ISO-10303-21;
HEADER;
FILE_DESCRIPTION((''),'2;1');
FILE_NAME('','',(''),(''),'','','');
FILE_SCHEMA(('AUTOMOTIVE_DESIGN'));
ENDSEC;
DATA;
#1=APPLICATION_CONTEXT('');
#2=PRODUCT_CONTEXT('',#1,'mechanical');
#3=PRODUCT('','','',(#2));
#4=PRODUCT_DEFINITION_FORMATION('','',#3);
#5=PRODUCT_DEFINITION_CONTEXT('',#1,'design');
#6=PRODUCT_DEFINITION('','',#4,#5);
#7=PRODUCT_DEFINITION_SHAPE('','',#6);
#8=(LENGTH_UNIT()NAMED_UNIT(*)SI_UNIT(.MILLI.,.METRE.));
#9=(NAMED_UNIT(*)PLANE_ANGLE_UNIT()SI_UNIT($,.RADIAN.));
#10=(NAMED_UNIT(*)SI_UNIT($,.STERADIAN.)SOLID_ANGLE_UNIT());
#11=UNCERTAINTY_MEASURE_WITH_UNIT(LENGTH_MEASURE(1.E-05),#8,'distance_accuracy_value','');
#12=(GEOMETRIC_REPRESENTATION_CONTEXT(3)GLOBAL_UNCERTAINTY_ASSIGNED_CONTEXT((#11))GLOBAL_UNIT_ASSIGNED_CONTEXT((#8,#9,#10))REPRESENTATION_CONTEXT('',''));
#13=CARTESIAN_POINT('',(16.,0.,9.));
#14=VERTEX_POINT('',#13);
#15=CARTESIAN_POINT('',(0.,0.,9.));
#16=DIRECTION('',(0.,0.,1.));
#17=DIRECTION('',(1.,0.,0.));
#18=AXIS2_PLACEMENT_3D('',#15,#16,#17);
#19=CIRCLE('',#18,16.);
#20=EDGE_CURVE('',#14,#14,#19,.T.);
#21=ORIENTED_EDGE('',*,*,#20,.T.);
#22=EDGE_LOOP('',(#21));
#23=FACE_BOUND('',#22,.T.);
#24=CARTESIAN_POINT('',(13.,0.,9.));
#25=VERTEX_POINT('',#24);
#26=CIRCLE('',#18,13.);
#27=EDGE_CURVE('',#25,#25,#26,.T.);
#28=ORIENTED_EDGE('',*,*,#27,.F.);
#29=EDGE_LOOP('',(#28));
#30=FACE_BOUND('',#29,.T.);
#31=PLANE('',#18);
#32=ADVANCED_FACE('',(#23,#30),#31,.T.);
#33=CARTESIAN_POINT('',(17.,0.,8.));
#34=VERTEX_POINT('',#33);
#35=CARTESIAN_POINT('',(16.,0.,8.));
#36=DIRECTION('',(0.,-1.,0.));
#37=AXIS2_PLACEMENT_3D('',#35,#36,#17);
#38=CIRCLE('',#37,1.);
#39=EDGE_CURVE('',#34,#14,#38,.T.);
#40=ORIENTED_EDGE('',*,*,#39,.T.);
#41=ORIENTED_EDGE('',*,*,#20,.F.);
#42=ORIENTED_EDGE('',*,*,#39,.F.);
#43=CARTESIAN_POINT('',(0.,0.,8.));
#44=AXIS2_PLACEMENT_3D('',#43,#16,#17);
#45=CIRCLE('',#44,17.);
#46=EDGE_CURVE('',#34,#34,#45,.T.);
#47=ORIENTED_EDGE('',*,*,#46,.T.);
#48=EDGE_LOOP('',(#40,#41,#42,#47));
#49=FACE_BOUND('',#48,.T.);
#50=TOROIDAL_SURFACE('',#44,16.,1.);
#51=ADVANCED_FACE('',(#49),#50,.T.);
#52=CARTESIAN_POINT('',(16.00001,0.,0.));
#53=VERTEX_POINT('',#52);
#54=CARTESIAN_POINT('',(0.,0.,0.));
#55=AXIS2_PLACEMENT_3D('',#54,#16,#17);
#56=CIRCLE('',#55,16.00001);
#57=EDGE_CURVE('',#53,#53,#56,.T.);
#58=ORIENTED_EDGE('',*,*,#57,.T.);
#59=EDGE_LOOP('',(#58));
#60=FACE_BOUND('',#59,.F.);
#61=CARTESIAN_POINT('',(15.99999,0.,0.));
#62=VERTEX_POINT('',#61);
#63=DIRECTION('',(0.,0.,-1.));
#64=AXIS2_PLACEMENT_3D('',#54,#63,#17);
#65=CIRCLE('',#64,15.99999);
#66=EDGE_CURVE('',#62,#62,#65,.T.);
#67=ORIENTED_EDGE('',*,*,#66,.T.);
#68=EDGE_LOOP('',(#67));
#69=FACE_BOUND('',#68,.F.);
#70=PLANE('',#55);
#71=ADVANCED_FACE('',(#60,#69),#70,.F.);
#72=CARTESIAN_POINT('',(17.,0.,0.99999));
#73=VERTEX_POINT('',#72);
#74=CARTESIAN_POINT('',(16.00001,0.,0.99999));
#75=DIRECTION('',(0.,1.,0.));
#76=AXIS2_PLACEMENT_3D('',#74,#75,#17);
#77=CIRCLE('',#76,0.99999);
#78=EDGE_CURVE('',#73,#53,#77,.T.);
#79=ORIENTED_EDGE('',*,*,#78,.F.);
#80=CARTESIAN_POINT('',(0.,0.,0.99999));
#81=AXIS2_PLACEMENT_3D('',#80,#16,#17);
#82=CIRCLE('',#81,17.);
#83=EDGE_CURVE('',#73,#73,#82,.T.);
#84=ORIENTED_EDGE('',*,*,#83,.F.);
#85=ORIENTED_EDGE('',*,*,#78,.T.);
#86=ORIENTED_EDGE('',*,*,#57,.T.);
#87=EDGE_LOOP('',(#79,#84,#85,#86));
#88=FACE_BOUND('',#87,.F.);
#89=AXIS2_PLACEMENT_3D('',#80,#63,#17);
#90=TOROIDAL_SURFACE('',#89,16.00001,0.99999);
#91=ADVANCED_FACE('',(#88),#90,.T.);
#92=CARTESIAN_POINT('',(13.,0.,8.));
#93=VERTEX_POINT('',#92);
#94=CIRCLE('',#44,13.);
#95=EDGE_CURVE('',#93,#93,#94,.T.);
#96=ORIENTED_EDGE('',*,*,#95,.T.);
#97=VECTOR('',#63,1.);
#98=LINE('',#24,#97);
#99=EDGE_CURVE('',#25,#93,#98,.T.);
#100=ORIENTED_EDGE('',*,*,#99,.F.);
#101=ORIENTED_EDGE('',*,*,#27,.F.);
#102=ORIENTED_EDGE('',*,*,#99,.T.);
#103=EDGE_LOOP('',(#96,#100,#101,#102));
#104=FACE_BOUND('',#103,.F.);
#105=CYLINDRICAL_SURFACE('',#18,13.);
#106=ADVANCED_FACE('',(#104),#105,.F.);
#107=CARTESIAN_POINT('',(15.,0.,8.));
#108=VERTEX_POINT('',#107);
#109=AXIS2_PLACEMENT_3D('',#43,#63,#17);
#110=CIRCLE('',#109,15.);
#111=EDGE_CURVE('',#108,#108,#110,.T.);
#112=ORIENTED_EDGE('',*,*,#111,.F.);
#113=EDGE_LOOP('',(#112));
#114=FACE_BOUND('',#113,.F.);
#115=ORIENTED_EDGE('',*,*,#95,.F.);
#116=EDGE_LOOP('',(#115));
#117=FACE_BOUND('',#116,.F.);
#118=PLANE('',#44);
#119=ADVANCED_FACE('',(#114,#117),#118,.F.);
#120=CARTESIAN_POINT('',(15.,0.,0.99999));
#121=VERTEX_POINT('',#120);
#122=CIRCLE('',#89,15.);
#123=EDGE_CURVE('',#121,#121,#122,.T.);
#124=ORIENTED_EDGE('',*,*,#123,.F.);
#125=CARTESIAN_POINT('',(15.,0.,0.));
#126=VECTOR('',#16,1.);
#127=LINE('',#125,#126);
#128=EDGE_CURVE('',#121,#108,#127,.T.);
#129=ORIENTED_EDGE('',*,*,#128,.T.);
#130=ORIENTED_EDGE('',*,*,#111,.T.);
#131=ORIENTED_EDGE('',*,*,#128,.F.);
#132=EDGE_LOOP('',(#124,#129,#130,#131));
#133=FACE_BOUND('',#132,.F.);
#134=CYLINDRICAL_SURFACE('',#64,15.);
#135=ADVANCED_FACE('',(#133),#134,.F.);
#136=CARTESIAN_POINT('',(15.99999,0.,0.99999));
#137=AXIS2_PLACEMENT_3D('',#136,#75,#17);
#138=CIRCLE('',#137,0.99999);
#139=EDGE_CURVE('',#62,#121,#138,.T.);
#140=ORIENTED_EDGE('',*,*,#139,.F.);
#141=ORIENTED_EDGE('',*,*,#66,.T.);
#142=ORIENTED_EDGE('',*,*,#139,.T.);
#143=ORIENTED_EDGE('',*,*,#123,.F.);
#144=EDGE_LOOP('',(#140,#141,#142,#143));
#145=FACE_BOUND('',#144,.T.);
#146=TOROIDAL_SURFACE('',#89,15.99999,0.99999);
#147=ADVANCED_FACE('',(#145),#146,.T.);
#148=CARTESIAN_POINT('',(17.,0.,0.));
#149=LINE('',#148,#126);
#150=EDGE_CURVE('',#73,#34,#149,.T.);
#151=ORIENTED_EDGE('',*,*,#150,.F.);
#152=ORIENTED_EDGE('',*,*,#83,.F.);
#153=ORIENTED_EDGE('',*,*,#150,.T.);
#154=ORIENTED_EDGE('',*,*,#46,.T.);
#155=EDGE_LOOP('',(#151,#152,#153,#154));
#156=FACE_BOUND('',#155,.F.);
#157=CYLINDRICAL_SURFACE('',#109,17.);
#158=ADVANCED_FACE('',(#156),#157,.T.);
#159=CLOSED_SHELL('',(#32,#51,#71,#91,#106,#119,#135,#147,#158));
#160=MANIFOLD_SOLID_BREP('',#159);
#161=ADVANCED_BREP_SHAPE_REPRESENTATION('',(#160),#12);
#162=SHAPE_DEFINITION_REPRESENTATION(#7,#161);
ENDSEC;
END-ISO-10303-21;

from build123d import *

# Parameters (mm, degrees)
F0_R     = 17
F1_DEPTH = 8
F2_R     = 15
F3_DEPTH = 8
F4_R     = 17
F5_DEPTH = 1
F6_R     = 13
F7_DEPTH = 1
F8_R     = 0.99999
F9_R     = 1


# Not quite as in the source:
# - a fillet or chamfer is up to 0.001 mm smaller than in the source, because OpenCascade refuses the exact size


with BuildPart() as f1:
    # F0 (on Top) → F1 (new body)
    with BuildSketch(Plane.XY):
        Circle(F0_R)
    extrude(amount=F1_DEPTH)

    # F2 (on face) → F3 (cut)
    with BuildSketch(Plane(origin=(0, 0, 0), x_dir=(1, 0, 0), z_dir=(0, 0, -1))):
        Circle(F2_R)
    extrude(amount=-F3_DEPTH, mode=Mode.SUBTRACT)

    # F4 (on face) → F5 (join)
    with BuildSketch(Plane.XY.offset(8)):
        Circle(F4_R)
    extrude(amount=F5_DEPTH)

    # F6 (on face) → F7 (cut)
    with BuildSketch(Plane.XY.offset(9)):
        Circle(F6_R)
    extrude(amount=-F7_DEPTH, mode=Mode.SUBTRACT)

    # F8 (radius 1 in the source; OpenCascade refuses exactly that, so slightly less here)
    f8_edges = [f1.edges().sort_by_distance(p)[0] for p in [
        (-17, 0, 0),
        (-15, 0, 0),
    ]]
    fillet(f8_edges, radius=F8_R)

    # F9
    f9_edges = [f1.edges().sort_by_distance(p)[0] for p in [
        (-17, 0, 9),
    ]]
    fillet(f9_edges, radius=F9_R)


solid = f1.part
